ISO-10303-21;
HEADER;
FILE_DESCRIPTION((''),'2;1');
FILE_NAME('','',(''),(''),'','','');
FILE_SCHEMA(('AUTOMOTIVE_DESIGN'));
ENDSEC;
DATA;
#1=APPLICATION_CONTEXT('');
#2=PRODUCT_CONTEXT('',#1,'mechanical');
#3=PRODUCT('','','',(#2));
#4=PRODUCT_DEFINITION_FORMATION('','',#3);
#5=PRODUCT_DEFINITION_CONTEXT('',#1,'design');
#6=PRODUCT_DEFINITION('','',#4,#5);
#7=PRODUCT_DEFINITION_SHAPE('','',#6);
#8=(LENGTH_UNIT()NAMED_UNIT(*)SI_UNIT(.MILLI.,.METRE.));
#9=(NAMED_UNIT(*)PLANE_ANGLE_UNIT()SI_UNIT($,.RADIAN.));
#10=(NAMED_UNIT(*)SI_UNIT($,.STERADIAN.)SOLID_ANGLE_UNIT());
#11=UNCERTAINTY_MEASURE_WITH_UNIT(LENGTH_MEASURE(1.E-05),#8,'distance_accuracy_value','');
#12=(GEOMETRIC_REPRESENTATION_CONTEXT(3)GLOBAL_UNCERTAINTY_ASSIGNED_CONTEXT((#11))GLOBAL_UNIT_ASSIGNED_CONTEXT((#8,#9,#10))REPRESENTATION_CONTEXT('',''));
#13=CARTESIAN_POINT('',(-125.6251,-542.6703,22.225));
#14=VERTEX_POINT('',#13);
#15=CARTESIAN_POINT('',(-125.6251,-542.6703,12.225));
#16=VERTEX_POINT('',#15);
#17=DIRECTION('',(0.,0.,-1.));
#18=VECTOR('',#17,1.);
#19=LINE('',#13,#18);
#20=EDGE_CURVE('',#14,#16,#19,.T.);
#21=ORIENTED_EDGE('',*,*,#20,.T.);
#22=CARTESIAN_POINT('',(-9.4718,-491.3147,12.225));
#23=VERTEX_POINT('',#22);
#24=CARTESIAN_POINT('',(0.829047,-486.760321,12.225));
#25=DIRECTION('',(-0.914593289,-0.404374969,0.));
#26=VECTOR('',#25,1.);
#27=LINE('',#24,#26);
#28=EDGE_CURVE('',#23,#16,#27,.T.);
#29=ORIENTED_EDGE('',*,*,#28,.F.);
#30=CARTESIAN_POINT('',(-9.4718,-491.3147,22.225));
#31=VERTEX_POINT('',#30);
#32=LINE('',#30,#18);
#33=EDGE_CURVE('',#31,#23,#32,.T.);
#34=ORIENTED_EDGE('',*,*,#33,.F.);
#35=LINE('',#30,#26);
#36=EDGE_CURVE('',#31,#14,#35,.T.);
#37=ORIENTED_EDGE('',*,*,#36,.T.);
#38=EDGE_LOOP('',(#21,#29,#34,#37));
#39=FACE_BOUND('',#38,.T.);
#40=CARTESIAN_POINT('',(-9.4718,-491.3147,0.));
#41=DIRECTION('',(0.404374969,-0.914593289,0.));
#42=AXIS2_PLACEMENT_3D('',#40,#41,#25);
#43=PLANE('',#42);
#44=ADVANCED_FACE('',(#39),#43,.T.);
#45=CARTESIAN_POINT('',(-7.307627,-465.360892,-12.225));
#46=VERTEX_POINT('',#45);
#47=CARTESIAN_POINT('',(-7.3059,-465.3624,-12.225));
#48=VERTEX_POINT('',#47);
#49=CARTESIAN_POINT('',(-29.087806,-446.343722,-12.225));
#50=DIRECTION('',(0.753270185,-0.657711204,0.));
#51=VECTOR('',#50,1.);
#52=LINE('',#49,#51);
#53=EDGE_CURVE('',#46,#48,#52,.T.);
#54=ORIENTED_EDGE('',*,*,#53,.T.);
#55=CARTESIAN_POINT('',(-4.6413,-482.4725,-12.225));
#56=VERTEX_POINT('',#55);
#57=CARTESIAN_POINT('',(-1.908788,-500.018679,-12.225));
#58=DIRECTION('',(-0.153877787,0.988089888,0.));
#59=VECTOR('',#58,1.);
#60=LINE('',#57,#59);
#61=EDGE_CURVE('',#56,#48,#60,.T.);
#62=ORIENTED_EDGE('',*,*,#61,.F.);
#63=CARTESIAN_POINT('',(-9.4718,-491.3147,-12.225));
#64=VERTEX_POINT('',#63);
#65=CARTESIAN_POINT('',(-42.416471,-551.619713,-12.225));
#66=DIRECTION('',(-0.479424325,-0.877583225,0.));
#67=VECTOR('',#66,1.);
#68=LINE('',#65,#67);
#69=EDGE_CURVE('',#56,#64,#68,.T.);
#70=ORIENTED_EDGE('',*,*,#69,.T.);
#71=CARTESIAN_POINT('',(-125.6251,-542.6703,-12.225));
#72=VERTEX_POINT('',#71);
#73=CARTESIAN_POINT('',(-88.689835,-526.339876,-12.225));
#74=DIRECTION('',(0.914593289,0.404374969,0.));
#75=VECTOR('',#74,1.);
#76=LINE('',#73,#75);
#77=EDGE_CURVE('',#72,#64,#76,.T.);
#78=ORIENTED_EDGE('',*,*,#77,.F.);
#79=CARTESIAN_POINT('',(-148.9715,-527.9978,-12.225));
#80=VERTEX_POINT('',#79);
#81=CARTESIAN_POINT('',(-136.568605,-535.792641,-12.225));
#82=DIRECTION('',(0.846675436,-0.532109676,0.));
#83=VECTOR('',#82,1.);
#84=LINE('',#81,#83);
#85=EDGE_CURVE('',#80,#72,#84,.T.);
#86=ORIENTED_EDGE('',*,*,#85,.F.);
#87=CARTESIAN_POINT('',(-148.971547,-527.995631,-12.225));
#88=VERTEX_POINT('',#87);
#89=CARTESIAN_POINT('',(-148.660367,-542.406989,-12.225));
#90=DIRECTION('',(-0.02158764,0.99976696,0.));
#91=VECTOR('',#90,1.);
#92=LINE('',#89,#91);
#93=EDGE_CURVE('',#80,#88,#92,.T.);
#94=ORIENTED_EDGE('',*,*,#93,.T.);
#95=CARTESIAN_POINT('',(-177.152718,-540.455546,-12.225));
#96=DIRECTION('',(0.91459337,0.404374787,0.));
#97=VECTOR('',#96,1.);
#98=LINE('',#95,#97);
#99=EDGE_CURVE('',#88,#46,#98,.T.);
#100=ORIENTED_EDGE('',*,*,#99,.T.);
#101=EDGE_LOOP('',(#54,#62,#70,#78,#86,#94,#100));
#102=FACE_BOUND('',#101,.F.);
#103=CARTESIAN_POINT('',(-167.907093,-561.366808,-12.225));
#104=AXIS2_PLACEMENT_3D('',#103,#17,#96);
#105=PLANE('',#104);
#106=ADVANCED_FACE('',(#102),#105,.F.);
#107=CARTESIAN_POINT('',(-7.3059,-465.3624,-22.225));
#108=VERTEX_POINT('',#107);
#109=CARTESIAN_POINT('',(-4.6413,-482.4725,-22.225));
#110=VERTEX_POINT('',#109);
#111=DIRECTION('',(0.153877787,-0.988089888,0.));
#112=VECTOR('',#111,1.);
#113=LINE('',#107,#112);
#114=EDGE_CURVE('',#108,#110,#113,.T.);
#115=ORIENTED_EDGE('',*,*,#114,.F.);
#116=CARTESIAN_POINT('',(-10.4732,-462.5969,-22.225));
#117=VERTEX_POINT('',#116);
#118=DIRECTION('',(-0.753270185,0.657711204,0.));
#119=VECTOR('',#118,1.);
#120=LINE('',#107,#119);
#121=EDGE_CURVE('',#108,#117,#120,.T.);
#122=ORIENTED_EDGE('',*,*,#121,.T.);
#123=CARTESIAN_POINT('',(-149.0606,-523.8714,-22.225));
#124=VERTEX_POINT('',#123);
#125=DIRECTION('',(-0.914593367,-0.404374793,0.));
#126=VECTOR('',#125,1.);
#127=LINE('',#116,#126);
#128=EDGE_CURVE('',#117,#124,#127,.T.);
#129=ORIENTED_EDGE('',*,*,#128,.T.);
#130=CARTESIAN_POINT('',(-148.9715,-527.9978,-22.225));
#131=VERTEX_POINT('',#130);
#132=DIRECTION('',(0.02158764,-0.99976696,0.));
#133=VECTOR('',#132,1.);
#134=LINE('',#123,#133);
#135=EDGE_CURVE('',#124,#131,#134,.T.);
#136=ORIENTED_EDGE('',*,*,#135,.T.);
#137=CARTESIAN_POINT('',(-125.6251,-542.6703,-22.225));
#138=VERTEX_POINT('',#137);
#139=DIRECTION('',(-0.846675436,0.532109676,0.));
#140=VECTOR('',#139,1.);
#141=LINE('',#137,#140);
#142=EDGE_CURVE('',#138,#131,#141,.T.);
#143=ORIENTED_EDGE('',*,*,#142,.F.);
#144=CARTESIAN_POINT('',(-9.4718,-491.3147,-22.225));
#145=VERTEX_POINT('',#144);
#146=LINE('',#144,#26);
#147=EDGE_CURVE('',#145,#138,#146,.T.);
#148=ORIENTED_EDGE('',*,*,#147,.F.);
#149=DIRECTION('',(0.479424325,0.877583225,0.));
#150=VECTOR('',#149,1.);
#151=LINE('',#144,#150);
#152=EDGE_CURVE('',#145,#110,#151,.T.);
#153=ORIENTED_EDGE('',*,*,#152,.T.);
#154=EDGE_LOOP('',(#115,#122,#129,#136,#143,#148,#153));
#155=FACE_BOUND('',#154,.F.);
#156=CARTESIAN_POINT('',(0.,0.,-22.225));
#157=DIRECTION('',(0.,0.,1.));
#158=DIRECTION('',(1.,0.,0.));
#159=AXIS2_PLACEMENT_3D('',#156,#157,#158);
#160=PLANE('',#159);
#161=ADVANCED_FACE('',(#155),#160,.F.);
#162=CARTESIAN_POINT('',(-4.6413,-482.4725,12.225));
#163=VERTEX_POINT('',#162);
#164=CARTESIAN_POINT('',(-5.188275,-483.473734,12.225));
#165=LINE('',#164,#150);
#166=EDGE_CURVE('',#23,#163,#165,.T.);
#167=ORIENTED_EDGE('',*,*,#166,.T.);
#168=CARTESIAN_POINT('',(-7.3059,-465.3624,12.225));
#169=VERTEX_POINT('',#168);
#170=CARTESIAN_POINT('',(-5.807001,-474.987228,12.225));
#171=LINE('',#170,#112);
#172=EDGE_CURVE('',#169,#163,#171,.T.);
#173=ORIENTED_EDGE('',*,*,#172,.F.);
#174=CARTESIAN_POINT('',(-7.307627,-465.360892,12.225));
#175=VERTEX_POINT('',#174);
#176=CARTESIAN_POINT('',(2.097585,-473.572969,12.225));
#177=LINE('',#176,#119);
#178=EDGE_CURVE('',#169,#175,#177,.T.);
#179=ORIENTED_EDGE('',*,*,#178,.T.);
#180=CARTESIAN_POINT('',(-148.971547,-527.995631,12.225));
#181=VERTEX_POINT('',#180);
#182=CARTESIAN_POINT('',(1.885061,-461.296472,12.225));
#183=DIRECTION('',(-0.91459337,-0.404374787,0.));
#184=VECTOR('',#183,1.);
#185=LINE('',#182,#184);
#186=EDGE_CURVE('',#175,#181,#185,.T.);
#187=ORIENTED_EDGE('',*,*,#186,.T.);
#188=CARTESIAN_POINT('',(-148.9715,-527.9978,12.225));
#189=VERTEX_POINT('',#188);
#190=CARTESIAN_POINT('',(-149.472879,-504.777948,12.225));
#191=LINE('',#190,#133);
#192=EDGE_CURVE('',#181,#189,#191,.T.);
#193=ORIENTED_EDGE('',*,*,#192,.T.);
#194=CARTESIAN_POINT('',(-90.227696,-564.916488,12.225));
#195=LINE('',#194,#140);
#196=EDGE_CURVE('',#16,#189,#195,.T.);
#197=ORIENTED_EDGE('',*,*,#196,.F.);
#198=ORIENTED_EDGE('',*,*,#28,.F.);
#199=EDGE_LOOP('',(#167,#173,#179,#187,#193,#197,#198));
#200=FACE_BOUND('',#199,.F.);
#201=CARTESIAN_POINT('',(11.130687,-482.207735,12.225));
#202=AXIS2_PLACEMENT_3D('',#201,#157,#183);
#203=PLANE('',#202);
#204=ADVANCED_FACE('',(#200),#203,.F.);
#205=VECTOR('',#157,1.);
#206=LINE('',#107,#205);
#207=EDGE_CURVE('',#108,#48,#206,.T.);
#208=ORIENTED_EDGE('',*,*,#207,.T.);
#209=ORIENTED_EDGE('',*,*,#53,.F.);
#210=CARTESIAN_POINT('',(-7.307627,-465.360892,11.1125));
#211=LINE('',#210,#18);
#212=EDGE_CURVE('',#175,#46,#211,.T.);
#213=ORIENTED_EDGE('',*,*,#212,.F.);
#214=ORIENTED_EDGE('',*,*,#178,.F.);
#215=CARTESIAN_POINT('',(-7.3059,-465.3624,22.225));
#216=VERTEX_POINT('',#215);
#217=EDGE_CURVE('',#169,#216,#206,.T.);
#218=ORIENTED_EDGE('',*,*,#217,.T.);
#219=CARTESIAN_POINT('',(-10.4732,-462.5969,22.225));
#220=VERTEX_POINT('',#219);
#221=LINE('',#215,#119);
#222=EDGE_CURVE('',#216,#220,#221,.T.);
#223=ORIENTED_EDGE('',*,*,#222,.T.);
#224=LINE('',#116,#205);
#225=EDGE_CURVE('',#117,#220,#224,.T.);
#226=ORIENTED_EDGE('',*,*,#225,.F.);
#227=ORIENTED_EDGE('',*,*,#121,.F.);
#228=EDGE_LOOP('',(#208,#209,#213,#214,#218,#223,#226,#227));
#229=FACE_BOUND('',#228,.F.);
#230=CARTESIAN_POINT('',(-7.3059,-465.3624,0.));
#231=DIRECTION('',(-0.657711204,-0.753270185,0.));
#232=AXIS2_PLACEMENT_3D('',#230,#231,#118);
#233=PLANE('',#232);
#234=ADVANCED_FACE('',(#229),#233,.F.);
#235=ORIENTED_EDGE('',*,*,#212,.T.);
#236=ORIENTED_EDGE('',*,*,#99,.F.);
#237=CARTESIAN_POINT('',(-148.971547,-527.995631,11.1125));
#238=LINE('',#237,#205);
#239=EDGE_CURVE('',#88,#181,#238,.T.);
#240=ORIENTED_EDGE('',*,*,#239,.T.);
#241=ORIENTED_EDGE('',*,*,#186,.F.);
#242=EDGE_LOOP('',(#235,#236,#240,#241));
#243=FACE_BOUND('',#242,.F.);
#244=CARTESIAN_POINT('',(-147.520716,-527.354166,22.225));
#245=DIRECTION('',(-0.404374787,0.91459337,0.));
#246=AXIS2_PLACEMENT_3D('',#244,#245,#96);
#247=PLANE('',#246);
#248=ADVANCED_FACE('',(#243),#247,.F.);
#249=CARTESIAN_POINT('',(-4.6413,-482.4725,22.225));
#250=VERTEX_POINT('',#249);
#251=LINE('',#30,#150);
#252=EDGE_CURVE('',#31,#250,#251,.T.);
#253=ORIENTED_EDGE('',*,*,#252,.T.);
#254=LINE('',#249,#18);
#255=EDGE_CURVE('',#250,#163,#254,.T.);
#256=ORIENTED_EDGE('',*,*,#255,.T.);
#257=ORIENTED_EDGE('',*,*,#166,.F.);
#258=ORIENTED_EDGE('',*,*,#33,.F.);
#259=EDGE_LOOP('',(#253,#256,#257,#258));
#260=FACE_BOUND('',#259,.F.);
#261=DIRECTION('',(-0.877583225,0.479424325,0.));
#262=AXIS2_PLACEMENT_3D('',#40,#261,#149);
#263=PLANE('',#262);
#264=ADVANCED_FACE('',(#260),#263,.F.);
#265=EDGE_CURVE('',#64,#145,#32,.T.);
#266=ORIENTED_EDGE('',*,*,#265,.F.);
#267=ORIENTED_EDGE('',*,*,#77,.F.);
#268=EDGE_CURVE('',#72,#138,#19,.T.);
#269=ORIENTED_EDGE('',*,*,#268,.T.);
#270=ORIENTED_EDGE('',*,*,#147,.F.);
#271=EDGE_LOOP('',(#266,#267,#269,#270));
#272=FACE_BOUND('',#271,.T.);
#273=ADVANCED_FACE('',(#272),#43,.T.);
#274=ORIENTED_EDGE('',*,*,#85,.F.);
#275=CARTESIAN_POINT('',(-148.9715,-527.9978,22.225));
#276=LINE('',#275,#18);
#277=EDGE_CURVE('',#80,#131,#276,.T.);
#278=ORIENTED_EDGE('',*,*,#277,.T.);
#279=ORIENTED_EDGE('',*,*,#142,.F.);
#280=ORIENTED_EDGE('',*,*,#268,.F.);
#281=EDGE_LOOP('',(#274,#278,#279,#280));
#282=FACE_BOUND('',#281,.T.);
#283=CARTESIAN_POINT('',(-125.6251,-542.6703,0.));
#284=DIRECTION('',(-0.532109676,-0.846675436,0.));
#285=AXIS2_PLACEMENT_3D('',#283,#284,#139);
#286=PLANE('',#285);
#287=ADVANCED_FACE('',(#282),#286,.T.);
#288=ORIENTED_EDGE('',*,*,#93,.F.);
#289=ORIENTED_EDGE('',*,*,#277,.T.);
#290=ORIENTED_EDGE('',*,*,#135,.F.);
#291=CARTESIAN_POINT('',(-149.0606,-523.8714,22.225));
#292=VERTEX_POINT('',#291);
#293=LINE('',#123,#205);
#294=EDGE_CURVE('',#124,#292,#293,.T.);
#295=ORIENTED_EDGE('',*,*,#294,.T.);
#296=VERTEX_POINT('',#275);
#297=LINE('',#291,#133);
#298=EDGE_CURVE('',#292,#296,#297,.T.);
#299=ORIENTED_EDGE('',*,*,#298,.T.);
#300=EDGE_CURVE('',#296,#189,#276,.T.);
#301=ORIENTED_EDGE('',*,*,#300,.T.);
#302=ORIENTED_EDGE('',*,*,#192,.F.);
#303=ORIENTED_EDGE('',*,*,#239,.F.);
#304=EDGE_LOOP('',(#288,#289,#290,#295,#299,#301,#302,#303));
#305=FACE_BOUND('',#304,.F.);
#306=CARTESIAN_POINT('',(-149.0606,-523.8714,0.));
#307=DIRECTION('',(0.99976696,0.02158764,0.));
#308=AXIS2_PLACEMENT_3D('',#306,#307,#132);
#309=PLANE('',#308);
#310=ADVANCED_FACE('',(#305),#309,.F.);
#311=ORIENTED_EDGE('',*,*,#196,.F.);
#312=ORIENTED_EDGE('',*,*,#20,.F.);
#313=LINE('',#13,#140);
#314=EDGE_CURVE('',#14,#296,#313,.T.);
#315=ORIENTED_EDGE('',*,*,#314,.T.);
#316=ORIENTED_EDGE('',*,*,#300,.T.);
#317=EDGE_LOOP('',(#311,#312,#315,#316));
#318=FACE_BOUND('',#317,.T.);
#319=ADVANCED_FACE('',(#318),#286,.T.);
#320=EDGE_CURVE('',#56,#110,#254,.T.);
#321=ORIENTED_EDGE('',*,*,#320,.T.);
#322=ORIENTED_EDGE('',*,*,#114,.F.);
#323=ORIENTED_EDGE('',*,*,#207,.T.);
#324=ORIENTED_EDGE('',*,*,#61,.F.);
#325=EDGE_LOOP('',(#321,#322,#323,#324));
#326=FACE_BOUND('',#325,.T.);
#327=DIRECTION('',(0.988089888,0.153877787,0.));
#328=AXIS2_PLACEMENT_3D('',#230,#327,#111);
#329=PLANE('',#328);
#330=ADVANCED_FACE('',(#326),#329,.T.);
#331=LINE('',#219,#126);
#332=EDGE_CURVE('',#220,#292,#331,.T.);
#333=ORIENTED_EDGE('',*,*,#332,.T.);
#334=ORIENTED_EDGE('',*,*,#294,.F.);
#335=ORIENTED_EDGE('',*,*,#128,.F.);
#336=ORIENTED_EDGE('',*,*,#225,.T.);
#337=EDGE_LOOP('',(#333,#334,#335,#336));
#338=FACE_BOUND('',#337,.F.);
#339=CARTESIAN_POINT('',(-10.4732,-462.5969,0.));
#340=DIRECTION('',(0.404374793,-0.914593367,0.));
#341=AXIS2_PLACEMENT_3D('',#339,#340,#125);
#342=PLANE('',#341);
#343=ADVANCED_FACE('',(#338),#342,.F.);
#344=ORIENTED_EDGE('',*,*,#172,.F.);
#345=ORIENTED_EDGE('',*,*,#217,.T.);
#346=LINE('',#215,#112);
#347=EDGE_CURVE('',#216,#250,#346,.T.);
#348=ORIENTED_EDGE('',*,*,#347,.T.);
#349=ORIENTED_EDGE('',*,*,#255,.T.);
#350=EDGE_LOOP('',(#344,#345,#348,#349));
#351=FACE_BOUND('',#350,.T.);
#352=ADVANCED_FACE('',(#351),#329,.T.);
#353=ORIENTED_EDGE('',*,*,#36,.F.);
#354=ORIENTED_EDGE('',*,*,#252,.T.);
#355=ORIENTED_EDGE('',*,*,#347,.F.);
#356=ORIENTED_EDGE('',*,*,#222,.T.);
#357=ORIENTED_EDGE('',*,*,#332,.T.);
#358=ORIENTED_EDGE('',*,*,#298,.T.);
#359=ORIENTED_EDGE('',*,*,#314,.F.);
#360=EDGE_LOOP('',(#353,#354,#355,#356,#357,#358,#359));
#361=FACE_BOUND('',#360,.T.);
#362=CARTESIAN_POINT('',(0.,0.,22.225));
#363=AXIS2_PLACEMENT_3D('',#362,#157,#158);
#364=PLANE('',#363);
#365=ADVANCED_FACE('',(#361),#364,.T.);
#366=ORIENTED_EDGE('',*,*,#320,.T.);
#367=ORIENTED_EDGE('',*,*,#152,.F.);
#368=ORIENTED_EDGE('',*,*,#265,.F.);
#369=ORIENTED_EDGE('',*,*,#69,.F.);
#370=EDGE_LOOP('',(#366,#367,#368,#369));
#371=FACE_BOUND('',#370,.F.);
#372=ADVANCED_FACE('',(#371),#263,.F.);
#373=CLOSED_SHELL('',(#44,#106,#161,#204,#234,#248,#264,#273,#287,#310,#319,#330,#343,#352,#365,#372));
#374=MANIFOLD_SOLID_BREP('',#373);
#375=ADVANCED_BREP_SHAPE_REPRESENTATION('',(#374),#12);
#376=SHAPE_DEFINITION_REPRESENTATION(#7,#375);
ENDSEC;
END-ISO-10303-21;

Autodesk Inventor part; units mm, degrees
ref_plane "YZ Plane" through (0, 0, 0) normal (1, 0, 0) x (0, 1, 0)
ref_plane "XZ Plane" through (0, 0, 0) normal (0, 1, 0) x (-1, 0, 0)
sketch "Sketch1" plane through (0, 0, 0) normal (0, 0, 1) x (1, 0, 0)
  line L0 (-7.3059, -465.3624) -> (-4.6413, -482.4725)
  line L1 (-9.4718, -491.3147) -> (-125.6251, -542.6703)
  line L2 (-125.6251, -542.6703) -> (-148.9715, -527.9978)
  line L3 (-148.9715, -527.9978) -> (-7.3059, -465.3624) construction
  line L4 (-7.3059, -465.3624) -> (-10.4732, -462.5969)
  line L5 (-10.4732, -462.5969) -> (-149.0606, -523.8714)
  line L6 (-149.0606, -523.8714) -> (-148.9715, -527.9978)
  line L7 (-9.4718, -491.3147) -> (-4.6413, -482.4725)
  point P0 (0, 0)
  point P1 (-3.6641, -488.7469)
  dimension "d3" = 3.81
  dimension "d6" = 133.35
  dimension "d8" = 6.35
  dimension "d9" = 6.35
extrude "Extrusion1" add sketch "Sketch1" along normal mid plane 44.45
sketch "Sketch2" plane through (-138.2759, -548.2636, 22.225) normal (-0.4043748, 0.9145934, 0) x (0.9145934, 0.4043748, 0)
  line L0 (-1.5872, 10) -> (153.3074, 10) construction
  line L1 (153.3074, 34.45) -> (-1.5872, 34.45) construction
  line L2 (163.3576, 10) -> (-32.3991, 10)
  line L3 (-32.3991, 10) -> (-32.3991, 34.45)
  line L4 (-32.3991, 34.45) -> (163.3576, 34.45)
  line L5 (163.3576, 34.45) -> (163.3576, 10)
  line L6 (163.3576, 6.0918) -> (163.3576, 38.3582) construction
  line L7 (-32.3991, 3.3518) -> (-32.3991, 41.0982) construction
  point P0 (348.1702, 22.225)
ref_plane "Work Plane1" through (-188.0551, -545.2781, -26.8885) normal (-0.4043748, 0.9145934, 0) x (0, 0, 1)
extrude "Extrusion2" cut sketch "Sketch2" along normal up to surface (22.86 mm away)
sketch "Sketch4" plane through (0, 0, 0) normal (0, 0, 1) x (1, 0, 0)
  point P0 (0, 0)
equation "\"d9\" = d8"
properties part number "BottomGrip"
